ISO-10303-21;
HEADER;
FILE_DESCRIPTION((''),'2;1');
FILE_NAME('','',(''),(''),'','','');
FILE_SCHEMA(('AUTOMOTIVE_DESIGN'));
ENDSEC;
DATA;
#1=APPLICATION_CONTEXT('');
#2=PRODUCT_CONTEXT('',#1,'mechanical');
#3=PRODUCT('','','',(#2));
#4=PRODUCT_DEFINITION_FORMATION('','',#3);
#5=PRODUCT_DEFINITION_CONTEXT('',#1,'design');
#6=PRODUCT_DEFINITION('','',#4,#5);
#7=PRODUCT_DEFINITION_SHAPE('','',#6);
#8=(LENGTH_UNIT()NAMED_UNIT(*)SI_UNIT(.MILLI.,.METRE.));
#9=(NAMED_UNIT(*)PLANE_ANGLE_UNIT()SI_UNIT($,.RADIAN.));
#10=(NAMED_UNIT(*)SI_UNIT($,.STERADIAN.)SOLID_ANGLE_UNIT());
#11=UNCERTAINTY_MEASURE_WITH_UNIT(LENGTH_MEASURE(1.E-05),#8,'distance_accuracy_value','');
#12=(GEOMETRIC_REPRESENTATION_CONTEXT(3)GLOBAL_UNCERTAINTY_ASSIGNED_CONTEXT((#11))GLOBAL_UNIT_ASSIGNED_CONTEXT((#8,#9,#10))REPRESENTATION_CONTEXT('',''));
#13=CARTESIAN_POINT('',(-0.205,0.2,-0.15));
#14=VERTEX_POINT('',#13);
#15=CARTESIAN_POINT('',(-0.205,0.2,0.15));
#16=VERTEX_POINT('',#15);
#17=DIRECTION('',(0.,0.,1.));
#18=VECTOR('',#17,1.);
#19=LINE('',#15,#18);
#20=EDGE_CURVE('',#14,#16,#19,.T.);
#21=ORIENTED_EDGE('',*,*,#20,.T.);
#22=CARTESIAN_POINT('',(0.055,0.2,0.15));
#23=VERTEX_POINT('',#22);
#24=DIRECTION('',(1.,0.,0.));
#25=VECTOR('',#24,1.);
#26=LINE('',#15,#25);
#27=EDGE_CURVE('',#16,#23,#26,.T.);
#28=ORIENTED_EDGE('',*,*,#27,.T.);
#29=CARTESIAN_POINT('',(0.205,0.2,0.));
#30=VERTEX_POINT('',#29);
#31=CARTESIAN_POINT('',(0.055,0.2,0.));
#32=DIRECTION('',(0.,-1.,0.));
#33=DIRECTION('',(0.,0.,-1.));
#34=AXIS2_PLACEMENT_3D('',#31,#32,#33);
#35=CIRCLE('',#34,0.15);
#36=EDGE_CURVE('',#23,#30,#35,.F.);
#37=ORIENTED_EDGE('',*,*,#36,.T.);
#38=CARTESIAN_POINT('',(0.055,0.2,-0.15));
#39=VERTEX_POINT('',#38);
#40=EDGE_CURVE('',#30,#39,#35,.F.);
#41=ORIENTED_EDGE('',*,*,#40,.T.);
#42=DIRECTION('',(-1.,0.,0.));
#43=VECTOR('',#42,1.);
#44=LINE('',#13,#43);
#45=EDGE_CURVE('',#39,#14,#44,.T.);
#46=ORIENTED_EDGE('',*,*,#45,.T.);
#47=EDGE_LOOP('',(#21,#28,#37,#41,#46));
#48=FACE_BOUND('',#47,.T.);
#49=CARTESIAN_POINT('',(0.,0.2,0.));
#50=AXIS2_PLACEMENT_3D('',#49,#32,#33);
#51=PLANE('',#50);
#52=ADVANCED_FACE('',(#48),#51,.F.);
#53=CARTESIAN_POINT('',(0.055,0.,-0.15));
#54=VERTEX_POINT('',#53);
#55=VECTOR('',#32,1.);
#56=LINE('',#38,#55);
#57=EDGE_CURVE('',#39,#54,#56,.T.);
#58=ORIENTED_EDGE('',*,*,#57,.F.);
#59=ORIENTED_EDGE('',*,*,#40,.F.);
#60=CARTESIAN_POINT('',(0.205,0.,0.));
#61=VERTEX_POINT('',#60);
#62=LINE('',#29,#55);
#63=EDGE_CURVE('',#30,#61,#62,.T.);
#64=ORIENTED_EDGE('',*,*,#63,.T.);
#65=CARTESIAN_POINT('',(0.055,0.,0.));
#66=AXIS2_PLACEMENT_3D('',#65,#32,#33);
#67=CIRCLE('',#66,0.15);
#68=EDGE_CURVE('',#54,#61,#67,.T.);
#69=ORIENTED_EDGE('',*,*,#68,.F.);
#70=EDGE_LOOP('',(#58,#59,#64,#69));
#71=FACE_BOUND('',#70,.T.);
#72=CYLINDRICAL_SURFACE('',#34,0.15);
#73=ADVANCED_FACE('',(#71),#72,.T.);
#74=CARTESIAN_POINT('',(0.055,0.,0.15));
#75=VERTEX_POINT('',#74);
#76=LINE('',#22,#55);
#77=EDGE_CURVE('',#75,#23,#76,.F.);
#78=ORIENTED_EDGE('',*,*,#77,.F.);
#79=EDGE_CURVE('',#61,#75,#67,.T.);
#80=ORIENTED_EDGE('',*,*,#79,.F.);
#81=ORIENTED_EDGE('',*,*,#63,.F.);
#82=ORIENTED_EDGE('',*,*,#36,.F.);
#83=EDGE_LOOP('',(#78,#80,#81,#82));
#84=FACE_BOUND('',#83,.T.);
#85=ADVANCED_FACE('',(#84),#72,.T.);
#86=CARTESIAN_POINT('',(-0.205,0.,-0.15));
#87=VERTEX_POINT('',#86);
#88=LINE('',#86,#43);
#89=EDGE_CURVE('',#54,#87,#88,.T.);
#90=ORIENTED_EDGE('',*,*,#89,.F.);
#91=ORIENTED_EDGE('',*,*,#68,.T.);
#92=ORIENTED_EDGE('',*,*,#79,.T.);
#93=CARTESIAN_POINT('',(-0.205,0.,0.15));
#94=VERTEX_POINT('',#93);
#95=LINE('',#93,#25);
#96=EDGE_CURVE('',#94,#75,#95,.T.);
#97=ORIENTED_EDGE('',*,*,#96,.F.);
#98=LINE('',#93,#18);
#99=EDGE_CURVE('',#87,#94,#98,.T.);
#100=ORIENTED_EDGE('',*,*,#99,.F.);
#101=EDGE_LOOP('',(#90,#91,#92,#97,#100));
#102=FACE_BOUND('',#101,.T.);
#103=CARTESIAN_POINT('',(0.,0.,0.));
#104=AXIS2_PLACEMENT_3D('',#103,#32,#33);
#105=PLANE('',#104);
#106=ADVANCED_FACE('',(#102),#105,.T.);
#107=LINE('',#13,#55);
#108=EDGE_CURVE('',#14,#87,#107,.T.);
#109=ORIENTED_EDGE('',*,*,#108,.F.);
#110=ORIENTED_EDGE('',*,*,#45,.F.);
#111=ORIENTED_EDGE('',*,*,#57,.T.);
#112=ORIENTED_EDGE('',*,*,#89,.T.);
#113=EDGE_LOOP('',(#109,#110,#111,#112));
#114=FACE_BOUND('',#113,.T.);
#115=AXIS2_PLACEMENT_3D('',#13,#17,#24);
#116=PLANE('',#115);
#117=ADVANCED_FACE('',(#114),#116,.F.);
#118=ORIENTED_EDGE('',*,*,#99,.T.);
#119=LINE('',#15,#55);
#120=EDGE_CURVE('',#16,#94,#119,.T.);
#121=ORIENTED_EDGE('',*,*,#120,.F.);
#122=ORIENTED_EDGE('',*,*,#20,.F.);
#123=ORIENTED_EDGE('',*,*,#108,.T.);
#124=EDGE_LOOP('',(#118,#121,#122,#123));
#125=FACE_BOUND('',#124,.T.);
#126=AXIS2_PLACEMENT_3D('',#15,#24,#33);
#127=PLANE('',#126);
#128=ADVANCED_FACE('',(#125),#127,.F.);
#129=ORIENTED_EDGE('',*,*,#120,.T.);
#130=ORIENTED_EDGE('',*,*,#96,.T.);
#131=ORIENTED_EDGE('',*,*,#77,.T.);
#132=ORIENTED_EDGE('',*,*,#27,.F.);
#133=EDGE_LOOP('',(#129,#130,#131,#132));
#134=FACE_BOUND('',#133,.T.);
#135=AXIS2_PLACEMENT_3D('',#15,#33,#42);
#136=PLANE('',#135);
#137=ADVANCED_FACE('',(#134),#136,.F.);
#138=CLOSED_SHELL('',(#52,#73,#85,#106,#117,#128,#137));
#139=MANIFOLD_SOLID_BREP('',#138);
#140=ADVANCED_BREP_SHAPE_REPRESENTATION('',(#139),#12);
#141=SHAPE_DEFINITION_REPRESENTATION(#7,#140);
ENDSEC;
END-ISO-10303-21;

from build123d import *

# Parameters (mm, degrees)
SKETCH1_W           = 0.41
SKETCH1_H           = 0.3
BOSS_EXTRUDE1_DEPTH = 0.2
FILLET1_R           = 0.15


with BuildPart() as part:
    # Sketch1 → Boss-Extrude1 (new body)
    with BuildSketch(Plane(origin=(0, 0, 0), x_dir=(1, 0, 0), z_dir=(0, 1, 0))):
        Rectangle(SKETCH1_W, SKETCH1_H)
    extrude(amount=BOSS_EXTRUDE1_DEPTH)

    # Fillet1
    # the kernel refuses this fillet: 0.15 mm, written as the material it takes off along each edge
    with BuildSketch(Plane(origin=(0.205, -0.375, -0.15), x_dir=(0, 0, 1), z_dir=(0, 1, 0)), Plane(origin=(0.205, -0.375, 0.15), x_dir=(-1, 0, 0), z_dir=(0, 1, 0))) as fillet1_piece_1:
        with BuildLine():
            CenterArc((FILLET1_R, -FILLET1_R), FILLET1_R, 90, 90)
            Line((0, -FILLET1_R), (0, 0))
            Line((0, 0), (FILLET1_R, 0))
        make_face()
    extrude(amount=0.95, mode=Mode.SUBTRACT)


solid = part.part
